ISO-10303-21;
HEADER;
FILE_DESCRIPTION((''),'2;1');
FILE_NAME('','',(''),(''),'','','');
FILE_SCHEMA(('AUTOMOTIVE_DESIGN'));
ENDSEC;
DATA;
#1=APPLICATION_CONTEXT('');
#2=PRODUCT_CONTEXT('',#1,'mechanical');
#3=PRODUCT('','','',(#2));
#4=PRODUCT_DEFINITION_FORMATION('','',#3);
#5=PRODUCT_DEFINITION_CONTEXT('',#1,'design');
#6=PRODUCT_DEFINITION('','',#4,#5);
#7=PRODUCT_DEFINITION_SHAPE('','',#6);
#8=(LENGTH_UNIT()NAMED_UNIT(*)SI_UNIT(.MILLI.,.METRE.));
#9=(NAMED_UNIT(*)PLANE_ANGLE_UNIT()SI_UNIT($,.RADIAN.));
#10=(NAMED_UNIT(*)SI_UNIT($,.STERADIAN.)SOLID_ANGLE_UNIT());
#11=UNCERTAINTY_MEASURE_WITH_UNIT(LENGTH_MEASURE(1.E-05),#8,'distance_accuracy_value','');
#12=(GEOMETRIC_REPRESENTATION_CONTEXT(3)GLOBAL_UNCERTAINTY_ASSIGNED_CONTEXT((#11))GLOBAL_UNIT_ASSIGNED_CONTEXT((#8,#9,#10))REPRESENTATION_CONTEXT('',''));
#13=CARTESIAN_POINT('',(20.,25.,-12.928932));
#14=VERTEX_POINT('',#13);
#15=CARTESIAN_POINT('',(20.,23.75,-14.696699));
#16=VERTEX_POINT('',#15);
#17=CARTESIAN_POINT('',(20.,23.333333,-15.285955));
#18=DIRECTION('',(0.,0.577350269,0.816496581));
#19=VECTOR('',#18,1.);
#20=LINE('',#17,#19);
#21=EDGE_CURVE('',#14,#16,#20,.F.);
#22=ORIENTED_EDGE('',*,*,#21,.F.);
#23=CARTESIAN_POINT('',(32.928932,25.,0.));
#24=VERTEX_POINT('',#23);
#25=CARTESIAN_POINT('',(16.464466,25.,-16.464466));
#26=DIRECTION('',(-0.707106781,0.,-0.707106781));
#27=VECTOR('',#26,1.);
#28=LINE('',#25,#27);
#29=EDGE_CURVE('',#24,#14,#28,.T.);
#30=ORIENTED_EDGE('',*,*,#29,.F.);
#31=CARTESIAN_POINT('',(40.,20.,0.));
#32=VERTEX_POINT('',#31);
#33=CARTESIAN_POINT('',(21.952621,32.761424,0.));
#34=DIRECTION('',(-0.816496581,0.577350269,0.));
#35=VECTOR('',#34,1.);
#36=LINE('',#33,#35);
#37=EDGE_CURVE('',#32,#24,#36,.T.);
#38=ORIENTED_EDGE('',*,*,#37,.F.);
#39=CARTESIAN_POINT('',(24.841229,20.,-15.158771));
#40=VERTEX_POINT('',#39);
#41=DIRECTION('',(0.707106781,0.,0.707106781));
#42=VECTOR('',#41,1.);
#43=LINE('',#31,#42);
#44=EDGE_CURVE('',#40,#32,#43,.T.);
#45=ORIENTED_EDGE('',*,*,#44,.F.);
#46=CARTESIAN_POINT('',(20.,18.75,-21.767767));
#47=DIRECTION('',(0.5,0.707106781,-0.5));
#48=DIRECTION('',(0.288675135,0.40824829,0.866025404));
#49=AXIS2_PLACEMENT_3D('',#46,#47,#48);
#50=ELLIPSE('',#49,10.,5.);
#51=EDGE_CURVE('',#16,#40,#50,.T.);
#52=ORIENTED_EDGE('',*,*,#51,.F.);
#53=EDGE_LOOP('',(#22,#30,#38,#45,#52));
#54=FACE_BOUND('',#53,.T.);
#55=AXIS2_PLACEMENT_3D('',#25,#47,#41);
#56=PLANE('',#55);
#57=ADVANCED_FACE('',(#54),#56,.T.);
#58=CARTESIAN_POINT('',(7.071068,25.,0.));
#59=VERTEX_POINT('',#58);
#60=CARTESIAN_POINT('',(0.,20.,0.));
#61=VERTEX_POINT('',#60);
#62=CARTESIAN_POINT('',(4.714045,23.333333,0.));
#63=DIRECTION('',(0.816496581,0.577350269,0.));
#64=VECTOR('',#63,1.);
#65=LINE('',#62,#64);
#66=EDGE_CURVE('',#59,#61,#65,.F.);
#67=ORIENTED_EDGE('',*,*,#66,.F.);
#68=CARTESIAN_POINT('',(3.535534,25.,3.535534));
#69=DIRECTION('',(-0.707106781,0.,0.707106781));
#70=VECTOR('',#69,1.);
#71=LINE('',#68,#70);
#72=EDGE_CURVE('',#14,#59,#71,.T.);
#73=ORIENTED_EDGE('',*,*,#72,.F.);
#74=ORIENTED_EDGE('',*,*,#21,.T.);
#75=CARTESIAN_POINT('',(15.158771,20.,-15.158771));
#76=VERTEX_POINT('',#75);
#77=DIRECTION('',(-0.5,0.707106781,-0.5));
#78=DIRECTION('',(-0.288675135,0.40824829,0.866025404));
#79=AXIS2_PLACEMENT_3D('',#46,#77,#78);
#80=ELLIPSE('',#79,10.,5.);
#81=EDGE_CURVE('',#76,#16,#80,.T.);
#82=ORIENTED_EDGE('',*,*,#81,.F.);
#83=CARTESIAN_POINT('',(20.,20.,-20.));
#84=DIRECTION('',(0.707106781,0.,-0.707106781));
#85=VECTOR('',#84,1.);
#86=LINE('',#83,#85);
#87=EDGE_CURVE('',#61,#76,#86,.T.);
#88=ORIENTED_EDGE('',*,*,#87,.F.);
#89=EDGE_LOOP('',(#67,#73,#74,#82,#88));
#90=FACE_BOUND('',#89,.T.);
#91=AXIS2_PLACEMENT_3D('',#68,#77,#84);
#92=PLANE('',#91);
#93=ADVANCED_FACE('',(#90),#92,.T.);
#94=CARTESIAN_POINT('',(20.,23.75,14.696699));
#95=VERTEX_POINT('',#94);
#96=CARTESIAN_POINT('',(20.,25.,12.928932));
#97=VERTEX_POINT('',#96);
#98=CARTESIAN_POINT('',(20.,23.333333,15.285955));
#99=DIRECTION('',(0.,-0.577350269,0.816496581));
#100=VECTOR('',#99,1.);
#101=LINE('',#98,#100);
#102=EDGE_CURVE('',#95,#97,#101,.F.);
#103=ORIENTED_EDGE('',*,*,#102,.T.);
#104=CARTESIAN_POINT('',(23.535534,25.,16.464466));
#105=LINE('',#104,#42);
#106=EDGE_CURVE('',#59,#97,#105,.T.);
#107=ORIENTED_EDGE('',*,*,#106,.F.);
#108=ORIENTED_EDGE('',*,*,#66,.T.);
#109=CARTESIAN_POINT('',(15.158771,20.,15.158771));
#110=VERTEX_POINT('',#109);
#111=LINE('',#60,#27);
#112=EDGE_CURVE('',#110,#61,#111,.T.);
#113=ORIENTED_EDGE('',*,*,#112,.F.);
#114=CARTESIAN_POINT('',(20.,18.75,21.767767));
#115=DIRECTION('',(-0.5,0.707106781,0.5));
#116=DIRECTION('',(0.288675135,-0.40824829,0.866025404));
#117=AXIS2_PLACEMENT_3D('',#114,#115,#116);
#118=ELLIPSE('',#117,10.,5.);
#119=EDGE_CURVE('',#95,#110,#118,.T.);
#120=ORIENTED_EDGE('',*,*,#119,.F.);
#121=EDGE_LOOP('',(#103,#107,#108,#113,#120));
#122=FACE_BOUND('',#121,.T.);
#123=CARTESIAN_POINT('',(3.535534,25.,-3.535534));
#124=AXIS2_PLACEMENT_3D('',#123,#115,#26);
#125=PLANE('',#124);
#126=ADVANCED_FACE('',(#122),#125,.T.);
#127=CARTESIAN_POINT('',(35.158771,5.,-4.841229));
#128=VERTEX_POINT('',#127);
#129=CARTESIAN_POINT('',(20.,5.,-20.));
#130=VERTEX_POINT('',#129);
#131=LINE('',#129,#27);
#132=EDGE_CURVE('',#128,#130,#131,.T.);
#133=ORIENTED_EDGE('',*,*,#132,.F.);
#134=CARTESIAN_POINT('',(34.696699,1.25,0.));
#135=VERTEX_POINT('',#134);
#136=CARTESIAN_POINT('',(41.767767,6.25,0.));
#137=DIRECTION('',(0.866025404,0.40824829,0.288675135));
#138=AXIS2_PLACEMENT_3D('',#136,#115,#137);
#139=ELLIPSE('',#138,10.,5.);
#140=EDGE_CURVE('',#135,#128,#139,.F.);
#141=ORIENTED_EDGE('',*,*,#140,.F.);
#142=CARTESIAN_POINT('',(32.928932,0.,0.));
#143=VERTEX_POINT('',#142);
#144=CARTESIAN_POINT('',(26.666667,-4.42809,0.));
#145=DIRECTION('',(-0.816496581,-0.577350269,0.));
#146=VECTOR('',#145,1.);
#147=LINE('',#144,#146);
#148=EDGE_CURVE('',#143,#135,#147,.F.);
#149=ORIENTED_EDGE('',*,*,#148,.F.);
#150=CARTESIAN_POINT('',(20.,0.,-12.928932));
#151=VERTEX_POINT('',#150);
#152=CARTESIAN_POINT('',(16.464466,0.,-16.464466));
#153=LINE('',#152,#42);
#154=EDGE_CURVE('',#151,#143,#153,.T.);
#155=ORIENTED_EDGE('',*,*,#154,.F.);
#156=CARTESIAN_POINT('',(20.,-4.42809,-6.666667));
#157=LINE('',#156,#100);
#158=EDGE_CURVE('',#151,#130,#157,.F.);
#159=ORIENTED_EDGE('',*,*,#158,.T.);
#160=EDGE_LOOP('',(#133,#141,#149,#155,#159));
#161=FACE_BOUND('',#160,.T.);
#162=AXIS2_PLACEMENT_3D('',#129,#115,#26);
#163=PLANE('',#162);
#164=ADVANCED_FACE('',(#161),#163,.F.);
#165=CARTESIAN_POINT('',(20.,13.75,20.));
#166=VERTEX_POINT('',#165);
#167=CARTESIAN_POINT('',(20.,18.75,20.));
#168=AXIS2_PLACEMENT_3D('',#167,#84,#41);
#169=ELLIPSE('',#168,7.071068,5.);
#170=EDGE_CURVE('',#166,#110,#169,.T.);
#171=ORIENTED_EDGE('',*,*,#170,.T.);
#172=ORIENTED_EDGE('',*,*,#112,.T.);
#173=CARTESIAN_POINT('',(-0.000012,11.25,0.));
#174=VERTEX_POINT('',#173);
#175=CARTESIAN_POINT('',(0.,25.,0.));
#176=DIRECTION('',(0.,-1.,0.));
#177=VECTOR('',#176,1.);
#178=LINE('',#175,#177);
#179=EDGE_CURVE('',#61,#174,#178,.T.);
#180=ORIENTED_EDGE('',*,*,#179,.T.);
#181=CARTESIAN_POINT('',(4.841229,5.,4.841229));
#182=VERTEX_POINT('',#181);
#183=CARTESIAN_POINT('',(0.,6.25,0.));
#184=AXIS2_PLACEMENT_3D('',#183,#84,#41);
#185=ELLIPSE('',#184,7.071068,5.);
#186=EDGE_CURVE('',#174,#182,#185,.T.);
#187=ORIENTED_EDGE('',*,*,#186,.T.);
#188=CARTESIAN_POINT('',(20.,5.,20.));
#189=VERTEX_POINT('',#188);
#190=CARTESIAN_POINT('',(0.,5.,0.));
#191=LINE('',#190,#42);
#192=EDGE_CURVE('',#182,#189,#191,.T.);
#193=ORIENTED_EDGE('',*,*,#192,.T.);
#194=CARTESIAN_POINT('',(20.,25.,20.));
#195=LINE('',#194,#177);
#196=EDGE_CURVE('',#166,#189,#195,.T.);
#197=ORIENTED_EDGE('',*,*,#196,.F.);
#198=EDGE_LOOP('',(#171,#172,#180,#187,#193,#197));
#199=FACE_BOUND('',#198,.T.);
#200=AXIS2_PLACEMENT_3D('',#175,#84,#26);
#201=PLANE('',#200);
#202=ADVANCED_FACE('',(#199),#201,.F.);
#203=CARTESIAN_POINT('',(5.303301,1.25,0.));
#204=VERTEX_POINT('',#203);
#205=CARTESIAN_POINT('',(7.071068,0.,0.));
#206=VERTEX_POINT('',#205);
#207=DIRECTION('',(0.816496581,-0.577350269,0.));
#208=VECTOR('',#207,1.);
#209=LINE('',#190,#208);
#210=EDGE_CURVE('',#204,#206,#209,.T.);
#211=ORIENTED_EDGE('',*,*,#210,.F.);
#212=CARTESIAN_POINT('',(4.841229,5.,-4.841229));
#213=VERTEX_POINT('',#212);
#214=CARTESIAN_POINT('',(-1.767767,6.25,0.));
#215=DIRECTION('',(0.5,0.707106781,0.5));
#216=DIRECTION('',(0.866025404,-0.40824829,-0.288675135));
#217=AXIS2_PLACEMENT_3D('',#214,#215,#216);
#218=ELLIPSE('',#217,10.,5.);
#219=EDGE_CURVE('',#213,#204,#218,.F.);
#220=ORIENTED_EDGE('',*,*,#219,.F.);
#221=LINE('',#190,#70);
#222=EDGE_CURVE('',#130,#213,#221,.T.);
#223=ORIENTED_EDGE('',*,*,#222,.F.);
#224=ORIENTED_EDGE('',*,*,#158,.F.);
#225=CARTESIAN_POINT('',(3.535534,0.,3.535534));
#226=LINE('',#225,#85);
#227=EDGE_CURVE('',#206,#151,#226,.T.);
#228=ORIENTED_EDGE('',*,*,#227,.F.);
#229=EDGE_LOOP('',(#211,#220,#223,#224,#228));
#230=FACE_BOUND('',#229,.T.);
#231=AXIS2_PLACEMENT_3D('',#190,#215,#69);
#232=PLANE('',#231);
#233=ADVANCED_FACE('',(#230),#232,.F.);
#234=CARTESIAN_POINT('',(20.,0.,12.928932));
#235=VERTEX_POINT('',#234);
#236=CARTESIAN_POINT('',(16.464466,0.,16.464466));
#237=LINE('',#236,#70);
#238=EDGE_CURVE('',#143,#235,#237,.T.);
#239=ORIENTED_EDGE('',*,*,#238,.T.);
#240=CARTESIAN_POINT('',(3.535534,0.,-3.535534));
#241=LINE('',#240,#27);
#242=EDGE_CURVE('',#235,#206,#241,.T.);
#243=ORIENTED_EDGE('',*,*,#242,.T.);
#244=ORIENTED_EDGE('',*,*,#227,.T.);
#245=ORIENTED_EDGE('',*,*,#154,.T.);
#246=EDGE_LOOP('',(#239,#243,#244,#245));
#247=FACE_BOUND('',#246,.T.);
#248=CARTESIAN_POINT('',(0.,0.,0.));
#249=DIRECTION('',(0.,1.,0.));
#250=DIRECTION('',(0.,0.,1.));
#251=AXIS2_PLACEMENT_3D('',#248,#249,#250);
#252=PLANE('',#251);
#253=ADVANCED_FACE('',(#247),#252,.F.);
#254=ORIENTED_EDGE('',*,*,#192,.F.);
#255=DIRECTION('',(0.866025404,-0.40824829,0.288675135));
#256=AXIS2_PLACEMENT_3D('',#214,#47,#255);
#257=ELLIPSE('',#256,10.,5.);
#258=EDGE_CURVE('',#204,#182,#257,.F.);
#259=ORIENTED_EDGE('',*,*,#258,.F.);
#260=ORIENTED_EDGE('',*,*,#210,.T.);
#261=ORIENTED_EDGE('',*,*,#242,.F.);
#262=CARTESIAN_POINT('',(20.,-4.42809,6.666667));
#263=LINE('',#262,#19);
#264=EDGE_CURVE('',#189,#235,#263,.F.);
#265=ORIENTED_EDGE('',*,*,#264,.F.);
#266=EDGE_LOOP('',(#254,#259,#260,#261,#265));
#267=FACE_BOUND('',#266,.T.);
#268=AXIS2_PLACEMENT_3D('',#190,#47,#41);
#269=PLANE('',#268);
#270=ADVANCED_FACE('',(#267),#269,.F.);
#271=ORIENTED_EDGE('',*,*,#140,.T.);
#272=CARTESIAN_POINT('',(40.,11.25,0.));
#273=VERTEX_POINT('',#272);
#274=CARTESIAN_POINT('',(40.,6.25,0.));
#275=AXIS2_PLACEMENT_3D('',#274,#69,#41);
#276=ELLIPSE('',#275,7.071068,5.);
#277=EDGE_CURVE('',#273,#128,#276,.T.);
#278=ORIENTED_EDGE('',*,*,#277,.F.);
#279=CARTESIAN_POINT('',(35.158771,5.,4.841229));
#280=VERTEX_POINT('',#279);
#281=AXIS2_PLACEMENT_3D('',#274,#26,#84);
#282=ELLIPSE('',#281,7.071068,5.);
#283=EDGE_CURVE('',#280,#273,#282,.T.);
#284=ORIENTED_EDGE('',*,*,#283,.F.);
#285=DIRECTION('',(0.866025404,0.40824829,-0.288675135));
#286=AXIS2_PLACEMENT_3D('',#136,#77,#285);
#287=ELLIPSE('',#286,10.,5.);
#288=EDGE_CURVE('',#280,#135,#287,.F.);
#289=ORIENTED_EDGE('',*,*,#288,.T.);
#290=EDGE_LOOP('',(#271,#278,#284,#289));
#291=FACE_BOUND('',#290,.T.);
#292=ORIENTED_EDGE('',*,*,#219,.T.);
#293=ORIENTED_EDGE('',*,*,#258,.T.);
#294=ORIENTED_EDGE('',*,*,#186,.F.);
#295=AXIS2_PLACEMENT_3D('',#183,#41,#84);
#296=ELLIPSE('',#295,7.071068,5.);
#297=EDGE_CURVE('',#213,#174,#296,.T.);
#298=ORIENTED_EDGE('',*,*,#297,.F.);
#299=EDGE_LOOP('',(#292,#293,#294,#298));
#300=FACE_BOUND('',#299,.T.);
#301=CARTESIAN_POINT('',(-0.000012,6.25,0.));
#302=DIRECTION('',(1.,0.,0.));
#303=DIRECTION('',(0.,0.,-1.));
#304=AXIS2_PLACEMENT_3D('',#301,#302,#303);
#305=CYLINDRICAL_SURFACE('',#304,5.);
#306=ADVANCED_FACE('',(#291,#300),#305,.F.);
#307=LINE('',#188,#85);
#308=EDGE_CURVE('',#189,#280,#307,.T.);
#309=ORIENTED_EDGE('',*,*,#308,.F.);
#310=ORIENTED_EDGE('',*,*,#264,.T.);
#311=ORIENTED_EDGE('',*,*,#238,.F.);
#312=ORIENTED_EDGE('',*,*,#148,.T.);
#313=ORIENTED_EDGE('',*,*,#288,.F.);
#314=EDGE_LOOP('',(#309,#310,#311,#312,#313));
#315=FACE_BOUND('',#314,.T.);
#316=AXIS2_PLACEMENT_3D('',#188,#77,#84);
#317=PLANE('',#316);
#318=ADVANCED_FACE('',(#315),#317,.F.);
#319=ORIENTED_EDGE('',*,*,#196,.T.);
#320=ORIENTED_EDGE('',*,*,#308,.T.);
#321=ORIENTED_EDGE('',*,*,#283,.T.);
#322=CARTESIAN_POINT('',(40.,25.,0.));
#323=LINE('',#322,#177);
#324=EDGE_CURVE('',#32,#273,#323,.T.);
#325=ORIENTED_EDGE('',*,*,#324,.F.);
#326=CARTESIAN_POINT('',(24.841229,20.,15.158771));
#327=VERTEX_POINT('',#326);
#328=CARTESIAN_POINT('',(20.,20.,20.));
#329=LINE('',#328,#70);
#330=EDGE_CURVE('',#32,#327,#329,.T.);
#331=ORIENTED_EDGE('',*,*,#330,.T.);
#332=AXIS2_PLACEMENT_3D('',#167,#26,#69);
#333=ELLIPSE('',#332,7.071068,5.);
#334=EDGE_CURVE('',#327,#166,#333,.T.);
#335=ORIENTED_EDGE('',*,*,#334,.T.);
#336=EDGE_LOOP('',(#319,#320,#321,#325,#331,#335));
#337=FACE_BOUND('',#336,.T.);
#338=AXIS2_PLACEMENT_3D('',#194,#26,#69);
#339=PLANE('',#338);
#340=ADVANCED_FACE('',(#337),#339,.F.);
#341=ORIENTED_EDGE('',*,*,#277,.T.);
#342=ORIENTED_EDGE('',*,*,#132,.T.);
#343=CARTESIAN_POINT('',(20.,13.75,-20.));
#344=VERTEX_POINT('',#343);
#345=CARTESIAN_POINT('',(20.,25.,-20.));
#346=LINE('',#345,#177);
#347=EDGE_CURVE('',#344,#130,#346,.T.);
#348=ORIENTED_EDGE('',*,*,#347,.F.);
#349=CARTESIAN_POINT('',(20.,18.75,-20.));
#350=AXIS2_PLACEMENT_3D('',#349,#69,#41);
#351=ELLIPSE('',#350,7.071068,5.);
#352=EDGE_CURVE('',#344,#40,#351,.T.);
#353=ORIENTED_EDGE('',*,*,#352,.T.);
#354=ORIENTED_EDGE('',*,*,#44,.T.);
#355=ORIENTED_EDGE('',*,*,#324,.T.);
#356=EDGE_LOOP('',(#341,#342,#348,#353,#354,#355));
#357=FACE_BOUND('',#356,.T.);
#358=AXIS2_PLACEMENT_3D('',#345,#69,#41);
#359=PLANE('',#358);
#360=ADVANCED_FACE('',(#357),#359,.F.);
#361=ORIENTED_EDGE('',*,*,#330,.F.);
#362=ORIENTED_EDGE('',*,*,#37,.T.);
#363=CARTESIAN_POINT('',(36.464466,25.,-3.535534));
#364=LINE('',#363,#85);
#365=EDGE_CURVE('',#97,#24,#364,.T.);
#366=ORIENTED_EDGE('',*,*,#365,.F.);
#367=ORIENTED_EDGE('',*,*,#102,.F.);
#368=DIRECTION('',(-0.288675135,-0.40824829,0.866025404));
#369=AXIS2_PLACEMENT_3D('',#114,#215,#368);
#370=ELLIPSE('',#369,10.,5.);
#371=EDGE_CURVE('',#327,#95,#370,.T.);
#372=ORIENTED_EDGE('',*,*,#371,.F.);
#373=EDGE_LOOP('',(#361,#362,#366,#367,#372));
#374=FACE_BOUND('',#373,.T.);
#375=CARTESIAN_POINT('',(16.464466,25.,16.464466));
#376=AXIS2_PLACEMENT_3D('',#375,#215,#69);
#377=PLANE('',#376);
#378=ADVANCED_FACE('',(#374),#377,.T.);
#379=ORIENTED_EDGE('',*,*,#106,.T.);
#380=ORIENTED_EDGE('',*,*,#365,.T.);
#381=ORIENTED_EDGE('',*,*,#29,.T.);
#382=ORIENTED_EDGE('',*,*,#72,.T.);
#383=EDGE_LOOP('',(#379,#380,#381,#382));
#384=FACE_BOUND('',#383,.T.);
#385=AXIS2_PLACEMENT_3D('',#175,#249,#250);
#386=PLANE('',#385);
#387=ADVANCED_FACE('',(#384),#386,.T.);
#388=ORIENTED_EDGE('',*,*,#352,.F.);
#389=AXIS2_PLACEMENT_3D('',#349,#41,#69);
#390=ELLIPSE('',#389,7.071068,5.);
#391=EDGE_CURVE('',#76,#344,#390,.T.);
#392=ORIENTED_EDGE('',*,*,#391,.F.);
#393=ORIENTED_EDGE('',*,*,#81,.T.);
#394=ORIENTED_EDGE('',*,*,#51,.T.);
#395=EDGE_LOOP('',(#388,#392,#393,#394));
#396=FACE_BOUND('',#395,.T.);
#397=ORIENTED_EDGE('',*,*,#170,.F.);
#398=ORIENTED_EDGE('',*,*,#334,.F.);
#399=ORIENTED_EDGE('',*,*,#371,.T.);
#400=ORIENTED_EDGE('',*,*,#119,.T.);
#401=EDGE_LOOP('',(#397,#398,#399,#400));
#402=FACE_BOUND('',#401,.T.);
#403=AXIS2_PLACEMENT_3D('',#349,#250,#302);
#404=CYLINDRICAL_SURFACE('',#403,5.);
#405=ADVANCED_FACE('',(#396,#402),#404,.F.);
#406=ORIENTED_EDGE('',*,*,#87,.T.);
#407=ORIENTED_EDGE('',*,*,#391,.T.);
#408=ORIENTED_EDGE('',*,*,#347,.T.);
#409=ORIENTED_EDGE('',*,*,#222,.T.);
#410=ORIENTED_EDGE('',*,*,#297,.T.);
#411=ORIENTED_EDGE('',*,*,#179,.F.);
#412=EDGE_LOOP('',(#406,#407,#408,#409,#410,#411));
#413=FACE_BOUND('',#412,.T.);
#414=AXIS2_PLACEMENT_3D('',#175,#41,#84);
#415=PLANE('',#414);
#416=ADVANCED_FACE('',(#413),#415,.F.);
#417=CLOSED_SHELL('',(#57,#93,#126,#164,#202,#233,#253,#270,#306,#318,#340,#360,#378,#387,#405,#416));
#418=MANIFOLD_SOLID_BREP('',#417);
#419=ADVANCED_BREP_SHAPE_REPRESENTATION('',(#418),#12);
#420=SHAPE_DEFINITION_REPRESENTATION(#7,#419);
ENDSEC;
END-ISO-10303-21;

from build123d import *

# Parameters (mm, degrees)
EXTRUDE_1_DEPTH          = 25
CUT_EXTRUDE_2_DEPTH      = 52.23475383
CUT_EXTRUDE_2_DEPTH_BACK = 52.23475383
SKETCH_2_R               = 5
CUT_EXTRUDE_3_DEPTH      = 52.23475383
CUT_EXTRUDE_3_DEPTH_BACK = 52.23475383
SKETCH_3_R               = 5
CHAMFER_1_SIZE           = 5


with BuildPart() as part:
    # 草圖1 → 填料-伸長1 (new body)
    with BuildSketch(Plane(origin=(0, 0, 0), x_dir=(1, 0, 0), z_dir=(0, 1, 0))):
        Polygon((0, 0), (20, 20), (40, 0), (20, -20), align=None)
    extrude(amount=EXTRUDE_1_DEPTH)

    # 草圖2 → 除料-伸長2 (cut, two sides: drawn at the far end of the back side and taken through both)
    with BuildSketch(Plane(origin=(0, 0, 0), x_dir=(0, 0, -1), z_dir=(1, 0, 0)).offset(-CUT_EXTRUDE_2_DEPTH_BACK)):
        with Locations(Location((0, 6.25, 0), (0, 0, 270.000068755))):
            Circle(SKETCH_2_R)
    extrude(amount=CUT_EXTRUDE_2_DEPTH + CUT_EXTRUDE_2_DEPTH_BACK, mode=Mode.SUBTRACT)

    # 草圖3 → 除料-伸長3 (cut, two sides: drawn at the far end of the back side and taken through both)
    with BuildSketch(Plane.XY.offset(-CUT_EXTRUDE_3_DEPTH_BACK)):
        with Locations(Location((20, 18.75, 0), (0, 0, 90))):
            Circle(SKETCH_3_R)
    extrude(amount=CUT_EXTRUDE_3_DEPTH + CUT_EXTRUDE_3_DEPTH_BACK, mode=Mode.SUBTRACT)

    # 導角1
    # the kernel refuses this chamfer: 5 mm, written as the material it takes off along each edge
    with BuildSketch(Plane(origin=(49.092272399, 0, -9.092272399), x_dir=(0.01944252080601414, 0.9996219169112968, 0.01944252080601414), z_dir=(-0.7071067811865476, 0, 0.7071067811865476)), Plane(origin=(10.907727601, 0, -29.092272399), x_dir=(0.019442520806014316, 0.9996219169112968, -0.01944252080601431), z_dir=(0.7071067811865475, 0, 0.7071067811865476)), Plane(origin=(-9.092272399, 0, 9.092272399), x_dir=(-0.01944252080601397, 0.9996219169112968, -0.019442520806013965), z_dir=(0.7071067811865475, 0, -0.7071067811865476)), Plane(origin=(29.092272399, 0, 29.092272399), x_dir=(-0.019442520806014486, 0.9996219169112968, 0.019442520806014486), z_dir=(-0.7071067811865476, 0, -0.7071067811865476)), Plane(origin=(10.907727601, 25, -29.092272399), x_dir=(-0.7068394360706736, 0.027495876610586313, 0.7068394360706735), z_dir=(0.7071067811865475, 0, 0.7071067811865476))) as chamfer_1_piece_1:
        Polygon((CHAMFER_1_SIZE * 0.999621916911, CHAMFER_1_SIZE * 0.0274958766106), (-CHAMFER_1_SIZE * 0.0274958766106, CHAMFER_1_SIZE * 0.999621916911), (0, 0), align=None)
    extrude(amount=54.001101127, mode=Mode.SUBTRACT)
    with BuildSketch(Plane(origin=(29.092272399, 25, 29.092272399), x_dir=(-0.019442520806014486, -0.9996219169112968, 0.019442520806014486), z_dir=(-0.7071067811865476, 0, -0.7071067811865476)), Plane(origin=(-9.092272399, 25, 9.092272399), x_dir=(-0.01944252080601397, -0.9996219169112968, -0.019442520806013965), z_dir=(0.7071067811865475, 0, -0.7071067811865476)), Plane(origin=(49.092272399, 25, -9.092272399), x_dir=(0.01944252080601414, -0.9996219169112968, 0.01944252080601414), z_dir=(-0.7071067811865476, 0, 0.7071067811865476))) as chamfer_1_piece_2:
        Polygon((CHAMFER_1_SIZE * 0.999621916911, -CHAMFER_1_SIZE * 0.0274958766106), (-CHAMFER_1_SIZE * 0.0274958766106, -CHAMFER_1_SIZE * 0.999621916911), (0, 0), align=None)
    extrude(amount=54.001101127, mode=Mode.SUBTRACT)


solid = part.part
